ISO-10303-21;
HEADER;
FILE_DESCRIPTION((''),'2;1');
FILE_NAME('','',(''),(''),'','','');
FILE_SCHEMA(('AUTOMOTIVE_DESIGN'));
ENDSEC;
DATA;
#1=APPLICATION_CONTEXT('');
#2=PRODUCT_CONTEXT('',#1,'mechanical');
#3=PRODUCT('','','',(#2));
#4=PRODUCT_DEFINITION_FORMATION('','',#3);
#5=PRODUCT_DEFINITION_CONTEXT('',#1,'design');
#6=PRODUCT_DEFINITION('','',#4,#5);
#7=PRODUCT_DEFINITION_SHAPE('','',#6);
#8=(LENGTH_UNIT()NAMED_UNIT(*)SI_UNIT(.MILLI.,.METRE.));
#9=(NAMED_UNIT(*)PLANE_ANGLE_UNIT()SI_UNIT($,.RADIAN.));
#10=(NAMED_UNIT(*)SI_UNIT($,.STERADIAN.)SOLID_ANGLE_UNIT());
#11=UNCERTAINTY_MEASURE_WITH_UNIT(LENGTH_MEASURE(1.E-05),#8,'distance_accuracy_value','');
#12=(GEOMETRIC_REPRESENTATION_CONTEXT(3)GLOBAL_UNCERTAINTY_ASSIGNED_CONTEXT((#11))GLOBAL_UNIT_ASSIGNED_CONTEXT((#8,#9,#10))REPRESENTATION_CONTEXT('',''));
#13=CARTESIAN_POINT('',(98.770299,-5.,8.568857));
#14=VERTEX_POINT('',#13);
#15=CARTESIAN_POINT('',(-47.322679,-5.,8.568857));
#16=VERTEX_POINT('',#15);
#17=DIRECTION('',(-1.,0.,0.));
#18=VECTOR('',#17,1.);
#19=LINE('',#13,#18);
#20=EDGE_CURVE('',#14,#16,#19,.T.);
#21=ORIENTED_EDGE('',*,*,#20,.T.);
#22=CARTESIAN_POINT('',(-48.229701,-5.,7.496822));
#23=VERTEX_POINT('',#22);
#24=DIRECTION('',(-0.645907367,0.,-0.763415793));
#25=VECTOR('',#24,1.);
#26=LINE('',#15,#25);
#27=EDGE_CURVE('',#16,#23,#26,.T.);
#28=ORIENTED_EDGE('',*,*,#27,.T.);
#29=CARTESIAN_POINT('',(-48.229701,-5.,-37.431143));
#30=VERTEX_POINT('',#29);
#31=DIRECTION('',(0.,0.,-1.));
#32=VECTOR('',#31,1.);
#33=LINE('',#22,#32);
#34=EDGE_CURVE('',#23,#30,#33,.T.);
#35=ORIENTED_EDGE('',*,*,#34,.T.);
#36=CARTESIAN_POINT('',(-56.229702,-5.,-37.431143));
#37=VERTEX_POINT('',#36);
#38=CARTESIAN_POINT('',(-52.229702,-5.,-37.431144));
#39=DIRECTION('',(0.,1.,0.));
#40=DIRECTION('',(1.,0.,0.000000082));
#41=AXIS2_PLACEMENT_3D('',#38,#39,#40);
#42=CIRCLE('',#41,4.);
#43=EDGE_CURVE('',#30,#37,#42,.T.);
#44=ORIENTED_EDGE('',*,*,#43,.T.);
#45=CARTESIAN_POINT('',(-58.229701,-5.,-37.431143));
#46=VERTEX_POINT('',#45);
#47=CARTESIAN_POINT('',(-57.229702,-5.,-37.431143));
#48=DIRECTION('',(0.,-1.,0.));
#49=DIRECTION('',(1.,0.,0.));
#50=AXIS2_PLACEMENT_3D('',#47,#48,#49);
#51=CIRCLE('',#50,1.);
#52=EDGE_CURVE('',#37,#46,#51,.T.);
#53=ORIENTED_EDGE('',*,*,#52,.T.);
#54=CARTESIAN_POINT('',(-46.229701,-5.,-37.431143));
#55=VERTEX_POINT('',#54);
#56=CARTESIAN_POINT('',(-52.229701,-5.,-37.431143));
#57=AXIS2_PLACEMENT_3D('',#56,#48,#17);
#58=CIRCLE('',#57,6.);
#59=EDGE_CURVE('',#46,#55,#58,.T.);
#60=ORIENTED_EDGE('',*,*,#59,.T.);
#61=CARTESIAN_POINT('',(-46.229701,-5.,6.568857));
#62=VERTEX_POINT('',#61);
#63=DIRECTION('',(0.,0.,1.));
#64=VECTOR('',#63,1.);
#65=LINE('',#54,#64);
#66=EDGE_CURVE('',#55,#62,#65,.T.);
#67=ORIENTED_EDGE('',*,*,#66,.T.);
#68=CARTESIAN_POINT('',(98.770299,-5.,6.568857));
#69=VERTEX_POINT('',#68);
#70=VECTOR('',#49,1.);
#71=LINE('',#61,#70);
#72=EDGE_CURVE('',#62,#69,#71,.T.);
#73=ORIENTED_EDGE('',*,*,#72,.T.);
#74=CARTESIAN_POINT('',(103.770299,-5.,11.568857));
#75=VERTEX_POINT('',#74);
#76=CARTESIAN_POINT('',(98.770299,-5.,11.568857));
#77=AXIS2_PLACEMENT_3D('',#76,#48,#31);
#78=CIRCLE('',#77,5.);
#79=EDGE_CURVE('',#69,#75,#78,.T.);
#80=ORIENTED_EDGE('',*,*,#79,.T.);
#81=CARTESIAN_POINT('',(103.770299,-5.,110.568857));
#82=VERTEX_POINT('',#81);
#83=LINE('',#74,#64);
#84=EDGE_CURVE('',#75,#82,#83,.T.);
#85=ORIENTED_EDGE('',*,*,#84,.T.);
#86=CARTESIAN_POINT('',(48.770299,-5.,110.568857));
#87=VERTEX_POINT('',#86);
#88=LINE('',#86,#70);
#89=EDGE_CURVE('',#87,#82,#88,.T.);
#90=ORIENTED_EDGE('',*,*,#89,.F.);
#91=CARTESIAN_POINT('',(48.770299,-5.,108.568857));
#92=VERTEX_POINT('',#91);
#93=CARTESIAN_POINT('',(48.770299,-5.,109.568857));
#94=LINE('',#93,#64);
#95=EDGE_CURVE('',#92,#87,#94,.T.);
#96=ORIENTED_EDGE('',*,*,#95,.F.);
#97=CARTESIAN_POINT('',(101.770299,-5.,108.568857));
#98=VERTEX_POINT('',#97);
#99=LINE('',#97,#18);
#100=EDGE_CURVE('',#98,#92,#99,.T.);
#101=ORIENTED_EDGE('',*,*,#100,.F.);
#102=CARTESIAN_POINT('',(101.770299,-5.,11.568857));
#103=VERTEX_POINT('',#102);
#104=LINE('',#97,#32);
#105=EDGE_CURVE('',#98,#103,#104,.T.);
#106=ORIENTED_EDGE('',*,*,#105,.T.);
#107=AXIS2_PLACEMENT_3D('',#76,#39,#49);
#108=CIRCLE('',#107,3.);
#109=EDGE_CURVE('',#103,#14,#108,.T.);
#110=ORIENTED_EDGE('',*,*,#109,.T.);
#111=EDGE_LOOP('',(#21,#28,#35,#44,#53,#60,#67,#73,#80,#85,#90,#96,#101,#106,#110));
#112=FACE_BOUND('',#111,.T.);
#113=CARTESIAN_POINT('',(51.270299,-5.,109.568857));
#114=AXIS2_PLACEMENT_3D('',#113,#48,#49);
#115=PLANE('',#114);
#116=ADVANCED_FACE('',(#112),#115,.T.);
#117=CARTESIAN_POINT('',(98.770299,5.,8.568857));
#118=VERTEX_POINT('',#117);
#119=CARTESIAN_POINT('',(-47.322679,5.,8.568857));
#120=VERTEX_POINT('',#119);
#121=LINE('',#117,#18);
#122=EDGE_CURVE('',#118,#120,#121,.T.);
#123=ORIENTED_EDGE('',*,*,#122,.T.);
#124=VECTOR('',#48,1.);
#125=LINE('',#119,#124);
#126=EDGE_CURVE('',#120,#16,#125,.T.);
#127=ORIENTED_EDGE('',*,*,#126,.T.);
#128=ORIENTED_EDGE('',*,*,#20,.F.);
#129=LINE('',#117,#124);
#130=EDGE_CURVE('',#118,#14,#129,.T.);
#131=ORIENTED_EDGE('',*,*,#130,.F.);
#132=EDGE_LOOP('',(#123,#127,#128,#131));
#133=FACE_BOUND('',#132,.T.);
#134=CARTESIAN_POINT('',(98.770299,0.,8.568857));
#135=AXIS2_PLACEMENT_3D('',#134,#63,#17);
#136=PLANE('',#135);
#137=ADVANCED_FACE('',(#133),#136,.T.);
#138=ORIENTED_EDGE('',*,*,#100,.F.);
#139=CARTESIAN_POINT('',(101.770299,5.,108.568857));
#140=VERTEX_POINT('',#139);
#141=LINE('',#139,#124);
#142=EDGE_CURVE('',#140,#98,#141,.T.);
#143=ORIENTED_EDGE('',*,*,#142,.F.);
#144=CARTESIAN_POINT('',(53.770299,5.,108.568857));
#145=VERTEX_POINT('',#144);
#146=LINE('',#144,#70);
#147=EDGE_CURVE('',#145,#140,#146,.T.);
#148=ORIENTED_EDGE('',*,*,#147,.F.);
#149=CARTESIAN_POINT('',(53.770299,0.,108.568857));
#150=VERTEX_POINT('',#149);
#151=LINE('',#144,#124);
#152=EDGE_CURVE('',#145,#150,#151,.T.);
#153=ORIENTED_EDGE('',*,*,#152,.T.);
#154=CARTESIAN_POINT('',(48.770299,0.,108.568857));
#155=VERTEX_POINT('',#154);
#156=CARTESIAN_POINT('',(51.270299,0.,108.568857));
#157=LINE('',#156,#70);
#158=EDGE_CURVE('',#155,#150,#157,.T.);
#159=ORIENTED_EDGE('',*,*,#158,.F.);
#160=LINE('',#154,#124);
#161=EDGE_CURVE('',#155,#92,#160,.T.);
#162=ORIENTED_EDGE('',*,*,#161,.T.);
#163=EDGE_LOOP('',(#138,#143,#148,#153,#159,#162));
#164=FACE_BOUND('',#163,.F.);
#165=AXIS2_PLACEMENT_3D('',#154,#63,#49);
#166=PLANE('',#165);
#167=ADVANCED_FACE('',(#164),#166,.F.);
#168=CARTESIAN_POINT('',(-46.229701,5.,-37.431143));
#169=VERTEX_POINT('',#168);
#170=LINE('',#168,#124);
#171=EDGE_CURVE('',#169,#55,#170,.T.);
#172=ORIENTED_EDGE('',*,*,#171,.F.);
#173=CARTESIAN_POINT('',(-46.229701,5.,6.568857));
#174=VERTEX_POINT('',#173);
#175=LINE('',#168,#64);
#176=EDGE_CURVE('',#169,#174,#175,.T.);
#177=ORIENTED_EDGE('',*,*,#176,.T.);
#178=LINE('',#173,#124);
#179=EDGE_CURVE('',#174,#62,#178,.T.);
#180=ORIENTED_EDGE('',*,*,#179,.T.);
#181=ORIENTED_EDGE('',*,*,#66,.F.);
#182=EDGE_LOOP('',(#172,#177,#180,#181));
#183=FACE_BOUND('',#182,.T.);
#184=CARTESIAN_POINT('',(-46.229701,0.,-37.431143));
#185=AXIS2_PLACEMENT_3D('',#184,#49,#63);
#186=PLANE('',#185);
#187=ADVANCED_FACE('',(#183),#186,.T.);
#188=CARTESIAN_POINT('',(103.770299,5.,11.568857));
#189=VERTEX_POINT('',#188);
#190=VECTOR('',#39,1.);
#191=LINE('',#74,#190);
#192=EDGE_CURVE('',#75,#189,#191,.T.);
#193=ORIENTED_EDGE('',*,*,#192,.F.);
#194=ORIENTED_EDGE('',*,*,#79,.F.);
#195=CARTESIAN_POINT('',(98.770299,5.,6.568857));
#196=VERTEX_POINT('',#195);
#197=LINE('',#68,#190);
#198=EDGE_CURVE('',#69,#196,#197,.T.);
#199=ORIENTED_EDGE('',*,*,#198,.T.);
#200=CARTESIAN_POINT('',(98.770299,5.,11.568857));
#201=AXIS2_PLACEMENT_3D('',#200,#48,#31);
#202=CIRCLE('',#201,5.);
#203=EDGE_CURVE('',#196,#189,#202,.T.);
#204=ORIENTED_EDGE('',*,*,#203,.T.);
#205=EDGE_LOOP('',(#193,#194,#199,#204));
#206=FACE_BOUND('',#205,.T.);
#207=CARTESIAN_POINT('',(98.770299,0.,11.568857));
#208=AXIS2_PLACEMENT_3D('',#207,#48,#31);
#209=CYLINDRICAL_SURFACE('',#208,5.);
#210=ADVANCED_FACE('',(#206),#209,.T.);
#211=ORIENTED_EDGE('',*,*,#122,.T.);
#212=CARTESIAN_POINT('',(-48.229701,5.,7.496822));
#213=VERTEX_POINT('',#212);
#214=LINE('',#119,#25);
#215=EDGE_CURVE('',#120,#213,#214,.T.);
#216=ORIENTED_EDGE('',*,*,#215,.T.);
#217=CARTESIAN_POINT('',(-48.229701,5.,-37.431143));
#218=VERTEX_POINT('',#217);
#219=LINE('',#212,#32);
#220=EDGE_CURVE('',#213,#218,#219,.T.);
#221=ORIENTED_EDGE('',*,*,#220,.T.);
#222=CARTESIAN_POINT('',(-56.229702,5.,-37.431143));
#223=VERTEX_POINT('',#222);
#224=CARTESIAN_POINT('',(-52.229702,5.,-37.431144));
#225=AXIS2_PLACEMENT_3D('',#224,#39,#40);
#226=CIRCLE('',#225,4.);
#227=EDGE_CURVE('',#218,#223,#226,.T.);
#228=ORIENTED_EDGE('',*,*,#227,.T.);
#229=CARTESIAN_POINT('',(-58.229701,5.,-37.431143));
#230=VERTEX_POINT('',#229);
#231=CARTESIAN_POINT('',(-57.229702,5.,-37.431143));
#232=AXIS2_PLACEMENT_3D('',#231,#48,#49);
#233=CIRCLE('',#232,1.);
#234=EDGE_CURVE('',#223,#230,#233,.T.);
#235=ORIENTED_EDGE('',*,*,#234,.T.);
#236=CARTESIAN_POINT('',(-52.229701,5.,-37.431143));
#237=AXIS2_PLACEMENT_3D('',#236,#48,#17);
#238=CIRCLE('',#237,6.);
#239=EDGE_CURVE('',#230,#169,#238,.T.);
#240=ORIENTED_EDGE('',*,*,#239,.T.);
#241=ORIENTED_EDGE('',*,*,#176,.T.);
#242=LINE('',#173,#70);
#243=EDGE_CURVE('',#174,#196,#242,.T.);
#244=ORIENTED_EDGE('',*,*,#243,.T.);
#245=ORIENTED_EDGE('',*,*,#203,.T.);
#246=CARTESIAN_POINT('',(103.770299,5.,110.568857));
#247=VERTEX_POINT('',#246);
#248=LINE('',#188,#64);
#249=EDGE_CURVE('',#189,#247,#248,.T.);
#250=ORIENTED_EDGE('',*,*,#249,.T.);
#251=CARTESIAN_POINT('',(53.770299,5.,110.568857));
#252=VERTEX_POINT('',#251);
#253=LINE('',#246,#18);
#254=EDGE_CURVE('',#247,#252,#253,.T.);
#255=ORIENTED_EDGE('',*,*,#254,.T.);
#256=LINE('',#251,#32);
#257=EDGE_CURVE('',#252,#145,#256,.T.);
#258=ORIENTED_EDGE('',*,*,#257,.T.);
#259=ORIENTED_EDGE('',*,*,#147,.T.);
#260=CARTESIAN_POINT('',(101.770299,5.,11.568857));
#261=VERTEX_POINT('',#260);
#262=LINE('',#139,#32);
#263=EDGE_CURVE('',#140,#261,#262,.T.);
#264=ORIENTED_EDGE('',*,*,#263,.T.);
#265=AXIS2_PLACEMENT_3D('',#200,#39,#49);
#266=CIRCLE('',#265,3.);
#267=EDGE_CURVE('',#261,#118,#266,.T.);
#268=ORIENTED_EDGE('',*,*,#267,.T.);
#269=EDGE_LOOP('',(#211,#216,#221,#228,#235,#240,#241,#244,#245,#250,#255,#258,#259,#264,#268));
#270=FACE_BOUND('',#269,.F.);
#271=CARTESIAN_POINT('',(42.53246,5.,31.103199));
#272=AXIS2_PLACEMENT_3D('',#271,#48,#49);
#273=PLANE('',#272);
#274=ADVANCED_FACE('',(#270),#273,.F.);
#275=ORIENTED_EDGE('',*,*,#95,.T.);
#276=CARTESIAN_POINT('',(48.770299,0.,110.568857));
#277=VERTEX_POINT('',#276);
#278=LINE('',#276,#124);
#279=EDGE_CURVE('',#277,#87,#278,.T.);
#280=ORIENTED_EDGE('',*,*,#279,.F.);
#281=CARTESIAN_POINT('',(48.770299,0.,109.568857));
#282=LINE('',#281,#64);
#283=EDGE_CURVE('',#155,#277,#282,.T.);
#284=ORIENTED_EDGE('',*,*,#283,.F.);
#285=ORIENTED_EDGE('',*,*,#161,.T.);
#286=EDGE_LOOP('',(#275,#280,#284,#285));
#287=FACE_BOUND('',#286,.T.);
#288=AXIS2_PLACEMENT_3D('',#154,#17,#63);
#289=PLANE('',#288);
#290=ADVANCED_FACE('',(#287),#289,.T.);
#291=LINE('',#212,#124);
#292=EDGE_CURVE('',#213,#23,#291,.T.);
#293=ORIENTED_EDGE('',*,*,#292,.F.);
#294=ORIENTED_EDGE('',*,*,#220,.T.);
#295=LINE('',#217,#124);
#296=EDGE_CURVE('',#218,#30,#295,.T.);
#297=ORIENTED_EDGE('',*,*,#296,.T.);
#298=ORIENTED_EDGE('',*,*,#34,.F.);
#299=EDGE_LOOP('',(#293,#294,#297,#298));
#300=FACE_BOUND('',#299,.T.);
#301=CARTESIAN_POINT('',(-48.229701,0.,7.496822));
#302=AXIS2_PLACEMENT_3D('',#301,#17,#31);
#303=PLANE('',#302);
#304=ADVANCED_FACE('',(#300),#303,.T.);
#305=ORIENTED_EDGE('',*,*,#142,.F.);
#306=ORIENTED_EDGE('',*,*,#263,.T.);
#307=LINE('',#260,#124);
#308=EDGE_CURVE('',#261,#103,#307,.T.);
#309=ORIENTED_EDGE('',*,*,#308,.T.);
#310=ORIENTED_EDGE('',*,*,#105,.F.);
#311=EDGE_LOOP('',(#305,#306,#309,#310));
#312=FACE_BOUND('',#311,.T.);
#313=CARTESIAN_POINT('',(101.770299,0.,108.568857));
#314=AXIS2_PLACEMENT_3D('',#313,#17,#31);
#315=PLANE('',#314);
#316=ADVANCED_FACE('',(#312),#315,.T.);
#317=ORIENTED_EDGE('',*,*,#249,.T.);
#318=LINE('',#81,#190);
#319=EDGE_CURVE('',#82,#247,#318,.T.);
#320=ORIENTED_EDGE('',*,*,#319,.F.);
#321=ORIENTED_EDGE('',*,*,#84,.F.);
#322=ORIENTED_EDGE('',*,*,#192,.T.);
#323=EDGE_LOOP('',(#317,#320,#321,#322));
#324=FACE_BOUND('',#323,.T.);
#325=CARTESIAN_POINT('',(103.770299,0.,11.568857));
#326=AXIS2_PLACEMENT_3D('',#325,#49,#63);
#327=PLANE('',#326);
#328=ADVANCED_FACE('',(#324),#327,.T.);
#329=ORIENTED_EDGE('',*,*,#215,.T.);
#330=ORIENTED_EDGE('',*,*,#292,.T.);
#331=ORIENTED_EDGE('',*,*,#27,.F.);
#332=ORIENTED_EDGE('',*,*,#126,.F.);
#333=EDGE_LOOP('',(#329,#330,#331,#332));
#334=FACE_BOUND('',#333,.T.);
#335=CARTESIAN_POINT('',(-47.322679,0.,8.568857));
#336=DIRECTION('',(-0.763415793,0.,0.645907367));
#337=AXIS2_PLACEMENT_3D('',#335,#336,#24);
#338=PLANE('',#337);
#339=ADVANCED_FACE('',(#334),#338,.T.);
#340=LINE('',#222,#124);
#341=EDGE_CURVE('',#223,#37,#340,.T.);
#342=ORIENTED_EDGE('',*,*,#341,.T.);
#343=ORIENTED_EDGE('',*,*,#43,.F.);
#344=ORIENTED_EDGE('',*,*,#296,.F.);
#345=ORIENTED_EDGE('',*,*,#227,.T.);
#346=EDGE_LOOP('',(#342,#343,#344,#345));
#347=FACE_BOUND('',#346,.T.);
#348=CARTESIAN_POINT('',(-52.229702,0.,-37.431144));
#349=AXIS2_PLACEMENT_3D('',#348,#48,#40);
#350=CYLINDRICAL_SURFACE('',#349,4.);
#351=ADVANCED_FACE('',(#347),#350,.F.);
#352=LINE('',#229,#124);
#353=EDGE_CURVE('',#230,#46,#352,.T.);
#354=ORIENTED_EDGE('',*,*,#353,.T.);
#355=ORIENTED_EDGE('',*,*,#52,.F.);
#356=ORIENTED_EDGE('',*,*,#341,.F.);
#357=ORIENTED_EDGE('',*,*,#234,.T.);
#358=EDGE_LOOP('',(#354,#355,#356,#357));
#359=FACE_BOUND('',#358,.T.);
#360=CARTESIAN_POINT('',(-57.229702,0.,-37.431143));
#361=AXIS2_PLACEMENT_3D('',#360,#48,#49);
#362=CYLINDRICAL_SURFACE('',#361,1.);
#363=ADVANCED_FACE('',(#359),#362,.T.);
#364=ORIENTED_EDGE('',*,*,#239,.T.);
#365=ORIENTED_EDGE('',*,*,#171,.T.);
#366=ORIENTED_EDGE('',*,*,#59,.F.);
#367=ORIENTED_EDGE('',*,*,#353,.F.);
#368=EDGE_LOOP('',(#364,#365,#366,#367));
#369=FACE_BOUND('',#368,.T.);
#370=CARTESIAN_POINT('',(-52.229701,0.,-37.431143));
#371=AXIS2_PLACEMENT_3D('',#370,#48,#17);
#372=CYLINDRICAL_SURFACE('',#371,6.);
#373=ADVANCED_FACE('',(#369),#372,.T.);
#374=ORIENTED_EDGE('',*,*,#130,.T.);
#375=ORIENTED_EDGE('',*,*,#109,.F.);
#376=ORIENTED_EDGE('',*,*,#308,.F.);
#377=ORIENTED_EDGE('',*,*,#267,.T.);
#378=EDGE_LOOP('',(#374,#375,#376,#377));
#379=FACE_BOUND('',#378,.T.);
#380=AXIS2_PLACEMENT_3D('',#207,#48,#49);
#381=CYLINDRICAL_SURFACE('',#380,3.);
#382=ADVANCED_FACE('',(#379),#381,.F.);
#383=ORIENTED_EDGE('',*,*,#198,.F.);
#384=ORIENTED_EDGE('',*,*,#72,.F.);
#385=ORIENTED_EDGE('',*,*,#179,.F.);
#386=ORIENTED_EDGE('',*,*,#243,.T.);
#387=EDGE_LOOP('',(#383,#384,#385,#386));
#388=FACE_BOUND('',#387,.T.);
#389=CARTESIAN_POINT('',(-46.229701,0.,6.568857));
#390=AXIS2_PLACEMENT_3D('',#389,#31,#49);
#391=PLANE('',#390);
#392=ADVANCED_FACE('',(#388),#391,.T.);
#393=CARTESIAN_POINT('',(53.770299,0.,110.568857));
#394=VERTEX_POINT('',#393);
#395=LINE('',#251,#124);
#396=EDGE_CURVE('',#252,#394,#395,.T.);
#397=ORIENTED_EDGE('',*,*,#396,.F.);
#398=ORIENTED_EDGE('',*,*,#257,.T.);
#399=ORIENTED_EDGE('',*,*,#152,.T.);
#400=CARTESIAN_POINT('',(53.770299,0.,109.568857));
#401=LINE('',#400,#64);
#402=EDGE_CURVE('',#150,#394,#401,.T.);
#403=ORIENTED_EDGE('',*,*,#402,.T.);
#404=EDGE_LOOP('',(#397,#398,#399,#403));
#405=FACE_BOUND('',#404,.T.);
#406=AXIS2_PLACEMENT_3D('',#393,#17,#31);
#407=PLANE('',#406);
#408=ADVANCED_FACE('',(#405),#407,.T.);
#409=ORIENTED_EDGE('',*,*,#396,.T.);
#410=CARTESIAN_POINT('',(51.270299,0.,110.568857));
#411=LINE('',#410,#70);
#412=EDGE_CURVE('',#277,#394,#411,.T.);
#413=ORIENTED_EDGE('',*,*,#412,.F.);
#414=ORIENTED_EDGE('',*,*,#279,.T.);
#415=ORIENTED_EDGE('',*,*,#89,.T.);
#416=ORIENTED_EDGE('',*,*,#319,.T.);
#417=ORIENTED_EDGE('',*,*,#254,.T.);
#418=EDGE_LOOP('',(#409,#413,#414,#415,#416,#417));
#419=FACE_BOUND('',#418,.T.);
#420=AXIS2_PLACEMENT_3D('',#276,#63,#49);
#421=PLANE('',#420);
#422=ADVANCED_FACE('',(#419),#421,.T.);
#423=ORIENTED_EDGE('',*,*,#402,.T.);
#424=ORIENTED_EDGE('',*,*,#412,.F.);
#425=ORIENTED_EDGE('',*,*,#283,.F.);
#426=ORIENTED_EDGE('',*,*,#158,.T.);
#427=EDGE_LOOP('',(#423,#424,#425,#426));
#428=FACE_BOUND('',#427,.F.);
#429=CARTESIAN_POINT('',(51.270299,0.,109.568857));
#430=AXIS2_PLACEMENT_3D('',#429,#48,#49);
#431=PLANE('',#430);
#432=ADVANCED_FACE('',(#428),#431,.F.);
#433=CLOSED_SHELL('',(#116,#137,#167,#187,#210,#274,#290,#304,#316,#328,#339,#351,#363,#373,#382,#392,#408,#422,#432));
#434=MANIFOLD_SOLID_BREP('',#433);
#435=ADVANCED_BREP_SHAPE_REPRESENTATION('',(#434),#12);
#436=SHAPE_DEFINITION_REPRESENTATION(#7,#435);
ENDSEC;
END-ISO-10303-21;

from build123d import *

# Parameters (mm, degrees)
F1_DEPTH = 5
F0_W     = 5
F0_H     = 2
F2_DEPTH = 5


# Not quite as in the source:
# - ends of sketch curves that miss each other by under 0.0002 mm in the source are joined


with BuildPart() as f1:
    # F0 (on Front) → F1 (new body, symmetric)
    with BuildSketch(Plane.XZ):
        with BuildLine():
            Line((103.7702985108, 110.5688567758), (53.7702985108, 110.5688567758))
            Line((53.7702985108, 110.5688567758), (53.7702985108, 108.5688567758))
            Line((53.7702985108, 108.5688567758), (101.7702985108, 108.5688567758))
            Line((101.7702985108, 108.5688567758), (101.7702985108, 11.5688567758))
            ThreePointArc((101.7702985108, 11.5688567758), (100.8916188543, 9.4475364322), (98.7702985108, 8.5688567758))
            Line((98.7702985108, 8.5688567758), (-47.322679311, 8.5688567758))
            Line((-47.322679311, 8.5688567758), (-48.2297014892, 7.4968221597))
            Line((-48.2297014892, 7.4968221597), (-48.2297014892, -37.4311432242))
            ThreePointArc((-48.2297014892, -37.4311432242), (-52.2297014892, -41.4311438799), (-56.2297021449, -37.4311432242))
            ThreePointArc((-56.2297021449, -37.4311432242), (-57.229701817, -36.4311435521), (-58.2297014892, -37.4311432242))
            ThreePointArc((-58.2297014892, -37.4311432242), (-52.2297014892, -43.4311432242), (-46.2297014892, -37.4311432242))
            Line((-46.2297014892, -37.4311432242), (-46.2297014892, 6.5688567758))
            Line((-46.2297014892, 6.5688567758), (98.7702985108, 6.5688567758))
            ThreePointArc((98.7702985108, 6.5688567758), (102.3058324167, 8.0333228698), (103.7702985108, 11.5688567758))
            Line((103.7702985108, 11.5688567758), (103.7702985108, 110.5688567758))
        make_face()
    extrude(amount=F1_DEPTH, both=True)

    # F0 (on Front) → F2 (join)
    with BuildSketch(Plane.XZ):
        with Locations((51.2702985108, 109.5688567758)):
            Rectangle(F0_W, F0_H)
    extrude(amount=F2_DEPTH)


solid = f1.part
